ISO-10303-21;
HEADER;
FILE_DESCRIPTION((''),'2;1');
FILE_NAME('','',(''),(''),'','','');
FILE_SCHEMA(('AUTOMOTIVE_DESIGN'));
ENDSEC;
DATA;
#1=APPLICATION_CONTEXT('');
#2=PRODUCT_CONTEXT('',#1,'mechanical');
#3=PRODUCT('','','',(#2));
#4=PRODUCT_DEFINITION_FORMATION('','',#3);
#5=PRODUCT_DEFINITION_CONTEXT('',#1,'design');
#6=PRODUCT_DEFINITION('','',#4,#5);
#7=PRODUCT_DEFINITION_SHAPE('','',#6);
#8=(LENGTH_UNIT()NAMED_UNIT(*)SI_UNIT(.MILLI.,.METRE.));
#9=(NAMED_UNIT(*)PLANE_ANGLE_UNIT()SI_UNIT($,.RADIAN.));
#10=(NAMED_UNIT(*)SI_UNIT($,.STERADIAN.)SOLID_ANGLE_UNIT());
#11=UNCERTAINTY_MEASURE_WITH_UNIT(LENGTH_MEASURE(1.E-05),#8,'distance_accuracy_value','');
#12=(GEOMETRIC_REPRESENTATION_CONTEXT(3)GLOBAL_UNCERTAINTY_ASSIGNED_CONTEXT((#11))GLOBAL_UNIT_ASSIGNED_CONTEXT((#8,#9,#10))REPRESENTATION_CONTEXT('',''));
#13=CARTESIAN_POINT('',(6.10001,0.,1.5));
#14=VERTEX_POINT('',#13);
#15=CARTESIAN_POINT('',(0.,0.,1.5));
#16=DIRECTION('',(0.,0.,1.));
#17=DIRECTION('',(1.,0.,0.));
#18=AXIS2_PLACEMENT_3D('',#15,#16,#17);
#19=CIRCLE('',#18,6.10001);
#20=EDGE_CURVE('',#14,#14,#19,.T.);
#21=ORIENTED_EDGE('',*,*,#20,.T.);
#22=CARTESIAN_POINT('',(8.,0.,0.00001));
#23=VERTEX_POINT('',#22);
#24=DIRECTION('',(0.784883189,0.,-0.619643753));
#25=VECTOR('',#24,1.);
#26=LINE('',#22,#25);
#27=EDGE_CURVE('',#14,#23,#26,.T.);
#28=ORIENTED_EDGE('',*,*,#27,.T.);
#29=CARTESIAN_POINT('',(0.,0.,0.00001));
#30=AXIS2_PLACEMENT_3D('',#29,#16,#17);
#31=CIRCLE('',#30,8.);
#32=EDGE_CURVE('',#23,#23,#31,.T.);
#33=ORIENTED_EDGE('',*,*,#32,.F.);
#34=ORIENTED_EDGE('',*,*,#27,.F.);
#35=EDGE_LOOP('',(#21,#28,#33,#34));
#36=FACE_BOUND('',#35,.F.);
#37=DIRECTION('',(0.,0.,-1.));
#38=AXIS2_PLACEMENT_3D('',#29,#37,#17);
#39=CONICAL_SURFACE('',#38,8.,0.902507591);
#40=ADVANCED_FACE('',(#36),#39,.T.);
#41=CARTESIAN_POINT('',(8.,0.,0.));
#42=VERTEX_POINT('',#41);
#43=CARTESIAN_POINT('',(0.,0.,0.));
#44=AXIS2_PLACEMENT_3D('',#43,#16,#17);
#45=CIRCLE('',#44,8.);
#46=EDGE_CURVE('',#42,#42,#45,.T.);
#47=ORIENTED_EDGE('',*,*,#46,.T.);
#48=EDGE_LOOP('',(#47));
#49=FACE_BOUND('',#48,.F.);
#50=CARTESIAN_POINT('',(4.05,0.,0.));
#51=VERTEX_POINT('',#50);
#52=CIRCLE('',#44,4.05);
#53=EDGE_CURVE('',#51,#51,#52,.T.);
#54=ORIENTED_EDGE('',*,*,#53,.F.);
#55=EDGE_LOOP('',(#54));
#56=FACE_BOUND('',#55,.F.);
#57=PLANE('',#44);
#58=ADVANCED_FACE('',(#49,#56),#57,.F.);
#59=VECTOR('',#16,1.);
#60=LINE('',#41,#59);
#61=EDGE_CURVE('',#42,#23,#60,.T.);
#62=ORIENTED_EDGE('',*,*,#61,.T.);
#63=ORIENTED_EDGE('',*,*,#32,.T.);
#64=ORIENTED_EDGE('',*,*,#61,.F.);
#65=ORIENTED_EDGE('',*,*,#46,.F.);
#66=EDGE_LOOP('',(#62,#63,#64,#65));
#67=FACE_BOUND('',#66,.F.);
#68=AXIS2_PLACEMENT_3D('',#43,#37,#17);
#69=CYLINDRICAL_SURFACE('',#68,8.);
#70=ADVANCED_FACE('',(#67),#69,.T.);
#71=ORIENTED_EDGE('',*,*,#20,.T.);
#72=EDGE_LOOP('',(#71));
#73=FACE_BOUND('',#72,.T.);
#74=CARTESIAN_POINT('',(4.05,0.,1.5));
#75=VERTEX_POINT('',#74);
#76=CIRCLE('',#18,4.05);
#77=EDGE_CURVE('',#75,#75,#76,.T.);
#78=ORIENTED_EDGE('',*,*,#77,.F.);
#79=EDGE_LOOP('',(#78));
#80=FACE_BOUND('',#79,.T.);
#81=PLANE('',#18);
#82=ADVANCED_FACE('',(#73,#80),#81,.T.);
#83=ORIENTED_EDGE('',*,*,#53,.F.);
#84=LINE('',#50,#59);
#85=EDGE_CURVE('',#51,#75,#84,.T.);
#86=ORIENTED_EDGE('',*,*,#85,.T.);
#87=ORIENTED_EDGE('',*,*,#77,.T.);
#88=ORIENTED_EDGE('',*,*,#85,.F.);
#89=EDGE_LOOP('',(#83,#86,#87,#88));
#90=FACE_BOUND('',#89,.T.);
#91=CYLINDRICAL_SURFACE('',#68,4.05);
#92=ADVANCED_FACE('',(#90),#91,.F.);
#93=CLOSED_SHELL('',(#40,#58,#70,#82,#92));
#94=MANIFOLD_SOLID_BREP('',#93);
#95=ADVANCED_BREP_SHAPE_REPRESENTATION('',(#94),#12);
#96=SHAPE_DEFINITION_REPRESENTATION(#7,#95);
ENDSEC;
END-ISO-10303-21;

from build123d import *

# Parameters (mm, degrees)
F0_R     = 8
F0_R_2   = 6.05
F0_R_3   = 4.05
F1_DEPTH = 1.5
F2_SIZE2 = 1.49999
F2_SIZE  = 1.89999


# Not quite as in the source:
# - a fillet or chamfer is up to 0.001 mm smaller than in the source, because OpenCascade refuses the exact size


with BuildPart() as f1:
    # F0 (on Top) → F1 (new body)
    with BuildSketch(Plane.XY):
        Circle(F0_R)
        Circle(F0_R_2, mode=Mode.SUBTRACT)
        Circle(F0_R_2)
        Circle(F0_R_3, mode=Mode.SUBTRACT)
    extrude(amount=F1_DEPTH)

    # F2 (size 1.9 and 1.5 in the source; OpenCascade refuses exactly that, so slightly less here)
    f2_edges = [f1.edges().sort_by_distance(p)[0] for p in [
        (-8, 0, 1.5),
    ]]
    f2_side = f1.faces().sort_by_distance((-4.276274, 0, 1.5))[0]
    chamfer(f2_edges, length=F2_SIZE, length2=F2_SIZE2, reference=f2_side)


solid = f1.part
